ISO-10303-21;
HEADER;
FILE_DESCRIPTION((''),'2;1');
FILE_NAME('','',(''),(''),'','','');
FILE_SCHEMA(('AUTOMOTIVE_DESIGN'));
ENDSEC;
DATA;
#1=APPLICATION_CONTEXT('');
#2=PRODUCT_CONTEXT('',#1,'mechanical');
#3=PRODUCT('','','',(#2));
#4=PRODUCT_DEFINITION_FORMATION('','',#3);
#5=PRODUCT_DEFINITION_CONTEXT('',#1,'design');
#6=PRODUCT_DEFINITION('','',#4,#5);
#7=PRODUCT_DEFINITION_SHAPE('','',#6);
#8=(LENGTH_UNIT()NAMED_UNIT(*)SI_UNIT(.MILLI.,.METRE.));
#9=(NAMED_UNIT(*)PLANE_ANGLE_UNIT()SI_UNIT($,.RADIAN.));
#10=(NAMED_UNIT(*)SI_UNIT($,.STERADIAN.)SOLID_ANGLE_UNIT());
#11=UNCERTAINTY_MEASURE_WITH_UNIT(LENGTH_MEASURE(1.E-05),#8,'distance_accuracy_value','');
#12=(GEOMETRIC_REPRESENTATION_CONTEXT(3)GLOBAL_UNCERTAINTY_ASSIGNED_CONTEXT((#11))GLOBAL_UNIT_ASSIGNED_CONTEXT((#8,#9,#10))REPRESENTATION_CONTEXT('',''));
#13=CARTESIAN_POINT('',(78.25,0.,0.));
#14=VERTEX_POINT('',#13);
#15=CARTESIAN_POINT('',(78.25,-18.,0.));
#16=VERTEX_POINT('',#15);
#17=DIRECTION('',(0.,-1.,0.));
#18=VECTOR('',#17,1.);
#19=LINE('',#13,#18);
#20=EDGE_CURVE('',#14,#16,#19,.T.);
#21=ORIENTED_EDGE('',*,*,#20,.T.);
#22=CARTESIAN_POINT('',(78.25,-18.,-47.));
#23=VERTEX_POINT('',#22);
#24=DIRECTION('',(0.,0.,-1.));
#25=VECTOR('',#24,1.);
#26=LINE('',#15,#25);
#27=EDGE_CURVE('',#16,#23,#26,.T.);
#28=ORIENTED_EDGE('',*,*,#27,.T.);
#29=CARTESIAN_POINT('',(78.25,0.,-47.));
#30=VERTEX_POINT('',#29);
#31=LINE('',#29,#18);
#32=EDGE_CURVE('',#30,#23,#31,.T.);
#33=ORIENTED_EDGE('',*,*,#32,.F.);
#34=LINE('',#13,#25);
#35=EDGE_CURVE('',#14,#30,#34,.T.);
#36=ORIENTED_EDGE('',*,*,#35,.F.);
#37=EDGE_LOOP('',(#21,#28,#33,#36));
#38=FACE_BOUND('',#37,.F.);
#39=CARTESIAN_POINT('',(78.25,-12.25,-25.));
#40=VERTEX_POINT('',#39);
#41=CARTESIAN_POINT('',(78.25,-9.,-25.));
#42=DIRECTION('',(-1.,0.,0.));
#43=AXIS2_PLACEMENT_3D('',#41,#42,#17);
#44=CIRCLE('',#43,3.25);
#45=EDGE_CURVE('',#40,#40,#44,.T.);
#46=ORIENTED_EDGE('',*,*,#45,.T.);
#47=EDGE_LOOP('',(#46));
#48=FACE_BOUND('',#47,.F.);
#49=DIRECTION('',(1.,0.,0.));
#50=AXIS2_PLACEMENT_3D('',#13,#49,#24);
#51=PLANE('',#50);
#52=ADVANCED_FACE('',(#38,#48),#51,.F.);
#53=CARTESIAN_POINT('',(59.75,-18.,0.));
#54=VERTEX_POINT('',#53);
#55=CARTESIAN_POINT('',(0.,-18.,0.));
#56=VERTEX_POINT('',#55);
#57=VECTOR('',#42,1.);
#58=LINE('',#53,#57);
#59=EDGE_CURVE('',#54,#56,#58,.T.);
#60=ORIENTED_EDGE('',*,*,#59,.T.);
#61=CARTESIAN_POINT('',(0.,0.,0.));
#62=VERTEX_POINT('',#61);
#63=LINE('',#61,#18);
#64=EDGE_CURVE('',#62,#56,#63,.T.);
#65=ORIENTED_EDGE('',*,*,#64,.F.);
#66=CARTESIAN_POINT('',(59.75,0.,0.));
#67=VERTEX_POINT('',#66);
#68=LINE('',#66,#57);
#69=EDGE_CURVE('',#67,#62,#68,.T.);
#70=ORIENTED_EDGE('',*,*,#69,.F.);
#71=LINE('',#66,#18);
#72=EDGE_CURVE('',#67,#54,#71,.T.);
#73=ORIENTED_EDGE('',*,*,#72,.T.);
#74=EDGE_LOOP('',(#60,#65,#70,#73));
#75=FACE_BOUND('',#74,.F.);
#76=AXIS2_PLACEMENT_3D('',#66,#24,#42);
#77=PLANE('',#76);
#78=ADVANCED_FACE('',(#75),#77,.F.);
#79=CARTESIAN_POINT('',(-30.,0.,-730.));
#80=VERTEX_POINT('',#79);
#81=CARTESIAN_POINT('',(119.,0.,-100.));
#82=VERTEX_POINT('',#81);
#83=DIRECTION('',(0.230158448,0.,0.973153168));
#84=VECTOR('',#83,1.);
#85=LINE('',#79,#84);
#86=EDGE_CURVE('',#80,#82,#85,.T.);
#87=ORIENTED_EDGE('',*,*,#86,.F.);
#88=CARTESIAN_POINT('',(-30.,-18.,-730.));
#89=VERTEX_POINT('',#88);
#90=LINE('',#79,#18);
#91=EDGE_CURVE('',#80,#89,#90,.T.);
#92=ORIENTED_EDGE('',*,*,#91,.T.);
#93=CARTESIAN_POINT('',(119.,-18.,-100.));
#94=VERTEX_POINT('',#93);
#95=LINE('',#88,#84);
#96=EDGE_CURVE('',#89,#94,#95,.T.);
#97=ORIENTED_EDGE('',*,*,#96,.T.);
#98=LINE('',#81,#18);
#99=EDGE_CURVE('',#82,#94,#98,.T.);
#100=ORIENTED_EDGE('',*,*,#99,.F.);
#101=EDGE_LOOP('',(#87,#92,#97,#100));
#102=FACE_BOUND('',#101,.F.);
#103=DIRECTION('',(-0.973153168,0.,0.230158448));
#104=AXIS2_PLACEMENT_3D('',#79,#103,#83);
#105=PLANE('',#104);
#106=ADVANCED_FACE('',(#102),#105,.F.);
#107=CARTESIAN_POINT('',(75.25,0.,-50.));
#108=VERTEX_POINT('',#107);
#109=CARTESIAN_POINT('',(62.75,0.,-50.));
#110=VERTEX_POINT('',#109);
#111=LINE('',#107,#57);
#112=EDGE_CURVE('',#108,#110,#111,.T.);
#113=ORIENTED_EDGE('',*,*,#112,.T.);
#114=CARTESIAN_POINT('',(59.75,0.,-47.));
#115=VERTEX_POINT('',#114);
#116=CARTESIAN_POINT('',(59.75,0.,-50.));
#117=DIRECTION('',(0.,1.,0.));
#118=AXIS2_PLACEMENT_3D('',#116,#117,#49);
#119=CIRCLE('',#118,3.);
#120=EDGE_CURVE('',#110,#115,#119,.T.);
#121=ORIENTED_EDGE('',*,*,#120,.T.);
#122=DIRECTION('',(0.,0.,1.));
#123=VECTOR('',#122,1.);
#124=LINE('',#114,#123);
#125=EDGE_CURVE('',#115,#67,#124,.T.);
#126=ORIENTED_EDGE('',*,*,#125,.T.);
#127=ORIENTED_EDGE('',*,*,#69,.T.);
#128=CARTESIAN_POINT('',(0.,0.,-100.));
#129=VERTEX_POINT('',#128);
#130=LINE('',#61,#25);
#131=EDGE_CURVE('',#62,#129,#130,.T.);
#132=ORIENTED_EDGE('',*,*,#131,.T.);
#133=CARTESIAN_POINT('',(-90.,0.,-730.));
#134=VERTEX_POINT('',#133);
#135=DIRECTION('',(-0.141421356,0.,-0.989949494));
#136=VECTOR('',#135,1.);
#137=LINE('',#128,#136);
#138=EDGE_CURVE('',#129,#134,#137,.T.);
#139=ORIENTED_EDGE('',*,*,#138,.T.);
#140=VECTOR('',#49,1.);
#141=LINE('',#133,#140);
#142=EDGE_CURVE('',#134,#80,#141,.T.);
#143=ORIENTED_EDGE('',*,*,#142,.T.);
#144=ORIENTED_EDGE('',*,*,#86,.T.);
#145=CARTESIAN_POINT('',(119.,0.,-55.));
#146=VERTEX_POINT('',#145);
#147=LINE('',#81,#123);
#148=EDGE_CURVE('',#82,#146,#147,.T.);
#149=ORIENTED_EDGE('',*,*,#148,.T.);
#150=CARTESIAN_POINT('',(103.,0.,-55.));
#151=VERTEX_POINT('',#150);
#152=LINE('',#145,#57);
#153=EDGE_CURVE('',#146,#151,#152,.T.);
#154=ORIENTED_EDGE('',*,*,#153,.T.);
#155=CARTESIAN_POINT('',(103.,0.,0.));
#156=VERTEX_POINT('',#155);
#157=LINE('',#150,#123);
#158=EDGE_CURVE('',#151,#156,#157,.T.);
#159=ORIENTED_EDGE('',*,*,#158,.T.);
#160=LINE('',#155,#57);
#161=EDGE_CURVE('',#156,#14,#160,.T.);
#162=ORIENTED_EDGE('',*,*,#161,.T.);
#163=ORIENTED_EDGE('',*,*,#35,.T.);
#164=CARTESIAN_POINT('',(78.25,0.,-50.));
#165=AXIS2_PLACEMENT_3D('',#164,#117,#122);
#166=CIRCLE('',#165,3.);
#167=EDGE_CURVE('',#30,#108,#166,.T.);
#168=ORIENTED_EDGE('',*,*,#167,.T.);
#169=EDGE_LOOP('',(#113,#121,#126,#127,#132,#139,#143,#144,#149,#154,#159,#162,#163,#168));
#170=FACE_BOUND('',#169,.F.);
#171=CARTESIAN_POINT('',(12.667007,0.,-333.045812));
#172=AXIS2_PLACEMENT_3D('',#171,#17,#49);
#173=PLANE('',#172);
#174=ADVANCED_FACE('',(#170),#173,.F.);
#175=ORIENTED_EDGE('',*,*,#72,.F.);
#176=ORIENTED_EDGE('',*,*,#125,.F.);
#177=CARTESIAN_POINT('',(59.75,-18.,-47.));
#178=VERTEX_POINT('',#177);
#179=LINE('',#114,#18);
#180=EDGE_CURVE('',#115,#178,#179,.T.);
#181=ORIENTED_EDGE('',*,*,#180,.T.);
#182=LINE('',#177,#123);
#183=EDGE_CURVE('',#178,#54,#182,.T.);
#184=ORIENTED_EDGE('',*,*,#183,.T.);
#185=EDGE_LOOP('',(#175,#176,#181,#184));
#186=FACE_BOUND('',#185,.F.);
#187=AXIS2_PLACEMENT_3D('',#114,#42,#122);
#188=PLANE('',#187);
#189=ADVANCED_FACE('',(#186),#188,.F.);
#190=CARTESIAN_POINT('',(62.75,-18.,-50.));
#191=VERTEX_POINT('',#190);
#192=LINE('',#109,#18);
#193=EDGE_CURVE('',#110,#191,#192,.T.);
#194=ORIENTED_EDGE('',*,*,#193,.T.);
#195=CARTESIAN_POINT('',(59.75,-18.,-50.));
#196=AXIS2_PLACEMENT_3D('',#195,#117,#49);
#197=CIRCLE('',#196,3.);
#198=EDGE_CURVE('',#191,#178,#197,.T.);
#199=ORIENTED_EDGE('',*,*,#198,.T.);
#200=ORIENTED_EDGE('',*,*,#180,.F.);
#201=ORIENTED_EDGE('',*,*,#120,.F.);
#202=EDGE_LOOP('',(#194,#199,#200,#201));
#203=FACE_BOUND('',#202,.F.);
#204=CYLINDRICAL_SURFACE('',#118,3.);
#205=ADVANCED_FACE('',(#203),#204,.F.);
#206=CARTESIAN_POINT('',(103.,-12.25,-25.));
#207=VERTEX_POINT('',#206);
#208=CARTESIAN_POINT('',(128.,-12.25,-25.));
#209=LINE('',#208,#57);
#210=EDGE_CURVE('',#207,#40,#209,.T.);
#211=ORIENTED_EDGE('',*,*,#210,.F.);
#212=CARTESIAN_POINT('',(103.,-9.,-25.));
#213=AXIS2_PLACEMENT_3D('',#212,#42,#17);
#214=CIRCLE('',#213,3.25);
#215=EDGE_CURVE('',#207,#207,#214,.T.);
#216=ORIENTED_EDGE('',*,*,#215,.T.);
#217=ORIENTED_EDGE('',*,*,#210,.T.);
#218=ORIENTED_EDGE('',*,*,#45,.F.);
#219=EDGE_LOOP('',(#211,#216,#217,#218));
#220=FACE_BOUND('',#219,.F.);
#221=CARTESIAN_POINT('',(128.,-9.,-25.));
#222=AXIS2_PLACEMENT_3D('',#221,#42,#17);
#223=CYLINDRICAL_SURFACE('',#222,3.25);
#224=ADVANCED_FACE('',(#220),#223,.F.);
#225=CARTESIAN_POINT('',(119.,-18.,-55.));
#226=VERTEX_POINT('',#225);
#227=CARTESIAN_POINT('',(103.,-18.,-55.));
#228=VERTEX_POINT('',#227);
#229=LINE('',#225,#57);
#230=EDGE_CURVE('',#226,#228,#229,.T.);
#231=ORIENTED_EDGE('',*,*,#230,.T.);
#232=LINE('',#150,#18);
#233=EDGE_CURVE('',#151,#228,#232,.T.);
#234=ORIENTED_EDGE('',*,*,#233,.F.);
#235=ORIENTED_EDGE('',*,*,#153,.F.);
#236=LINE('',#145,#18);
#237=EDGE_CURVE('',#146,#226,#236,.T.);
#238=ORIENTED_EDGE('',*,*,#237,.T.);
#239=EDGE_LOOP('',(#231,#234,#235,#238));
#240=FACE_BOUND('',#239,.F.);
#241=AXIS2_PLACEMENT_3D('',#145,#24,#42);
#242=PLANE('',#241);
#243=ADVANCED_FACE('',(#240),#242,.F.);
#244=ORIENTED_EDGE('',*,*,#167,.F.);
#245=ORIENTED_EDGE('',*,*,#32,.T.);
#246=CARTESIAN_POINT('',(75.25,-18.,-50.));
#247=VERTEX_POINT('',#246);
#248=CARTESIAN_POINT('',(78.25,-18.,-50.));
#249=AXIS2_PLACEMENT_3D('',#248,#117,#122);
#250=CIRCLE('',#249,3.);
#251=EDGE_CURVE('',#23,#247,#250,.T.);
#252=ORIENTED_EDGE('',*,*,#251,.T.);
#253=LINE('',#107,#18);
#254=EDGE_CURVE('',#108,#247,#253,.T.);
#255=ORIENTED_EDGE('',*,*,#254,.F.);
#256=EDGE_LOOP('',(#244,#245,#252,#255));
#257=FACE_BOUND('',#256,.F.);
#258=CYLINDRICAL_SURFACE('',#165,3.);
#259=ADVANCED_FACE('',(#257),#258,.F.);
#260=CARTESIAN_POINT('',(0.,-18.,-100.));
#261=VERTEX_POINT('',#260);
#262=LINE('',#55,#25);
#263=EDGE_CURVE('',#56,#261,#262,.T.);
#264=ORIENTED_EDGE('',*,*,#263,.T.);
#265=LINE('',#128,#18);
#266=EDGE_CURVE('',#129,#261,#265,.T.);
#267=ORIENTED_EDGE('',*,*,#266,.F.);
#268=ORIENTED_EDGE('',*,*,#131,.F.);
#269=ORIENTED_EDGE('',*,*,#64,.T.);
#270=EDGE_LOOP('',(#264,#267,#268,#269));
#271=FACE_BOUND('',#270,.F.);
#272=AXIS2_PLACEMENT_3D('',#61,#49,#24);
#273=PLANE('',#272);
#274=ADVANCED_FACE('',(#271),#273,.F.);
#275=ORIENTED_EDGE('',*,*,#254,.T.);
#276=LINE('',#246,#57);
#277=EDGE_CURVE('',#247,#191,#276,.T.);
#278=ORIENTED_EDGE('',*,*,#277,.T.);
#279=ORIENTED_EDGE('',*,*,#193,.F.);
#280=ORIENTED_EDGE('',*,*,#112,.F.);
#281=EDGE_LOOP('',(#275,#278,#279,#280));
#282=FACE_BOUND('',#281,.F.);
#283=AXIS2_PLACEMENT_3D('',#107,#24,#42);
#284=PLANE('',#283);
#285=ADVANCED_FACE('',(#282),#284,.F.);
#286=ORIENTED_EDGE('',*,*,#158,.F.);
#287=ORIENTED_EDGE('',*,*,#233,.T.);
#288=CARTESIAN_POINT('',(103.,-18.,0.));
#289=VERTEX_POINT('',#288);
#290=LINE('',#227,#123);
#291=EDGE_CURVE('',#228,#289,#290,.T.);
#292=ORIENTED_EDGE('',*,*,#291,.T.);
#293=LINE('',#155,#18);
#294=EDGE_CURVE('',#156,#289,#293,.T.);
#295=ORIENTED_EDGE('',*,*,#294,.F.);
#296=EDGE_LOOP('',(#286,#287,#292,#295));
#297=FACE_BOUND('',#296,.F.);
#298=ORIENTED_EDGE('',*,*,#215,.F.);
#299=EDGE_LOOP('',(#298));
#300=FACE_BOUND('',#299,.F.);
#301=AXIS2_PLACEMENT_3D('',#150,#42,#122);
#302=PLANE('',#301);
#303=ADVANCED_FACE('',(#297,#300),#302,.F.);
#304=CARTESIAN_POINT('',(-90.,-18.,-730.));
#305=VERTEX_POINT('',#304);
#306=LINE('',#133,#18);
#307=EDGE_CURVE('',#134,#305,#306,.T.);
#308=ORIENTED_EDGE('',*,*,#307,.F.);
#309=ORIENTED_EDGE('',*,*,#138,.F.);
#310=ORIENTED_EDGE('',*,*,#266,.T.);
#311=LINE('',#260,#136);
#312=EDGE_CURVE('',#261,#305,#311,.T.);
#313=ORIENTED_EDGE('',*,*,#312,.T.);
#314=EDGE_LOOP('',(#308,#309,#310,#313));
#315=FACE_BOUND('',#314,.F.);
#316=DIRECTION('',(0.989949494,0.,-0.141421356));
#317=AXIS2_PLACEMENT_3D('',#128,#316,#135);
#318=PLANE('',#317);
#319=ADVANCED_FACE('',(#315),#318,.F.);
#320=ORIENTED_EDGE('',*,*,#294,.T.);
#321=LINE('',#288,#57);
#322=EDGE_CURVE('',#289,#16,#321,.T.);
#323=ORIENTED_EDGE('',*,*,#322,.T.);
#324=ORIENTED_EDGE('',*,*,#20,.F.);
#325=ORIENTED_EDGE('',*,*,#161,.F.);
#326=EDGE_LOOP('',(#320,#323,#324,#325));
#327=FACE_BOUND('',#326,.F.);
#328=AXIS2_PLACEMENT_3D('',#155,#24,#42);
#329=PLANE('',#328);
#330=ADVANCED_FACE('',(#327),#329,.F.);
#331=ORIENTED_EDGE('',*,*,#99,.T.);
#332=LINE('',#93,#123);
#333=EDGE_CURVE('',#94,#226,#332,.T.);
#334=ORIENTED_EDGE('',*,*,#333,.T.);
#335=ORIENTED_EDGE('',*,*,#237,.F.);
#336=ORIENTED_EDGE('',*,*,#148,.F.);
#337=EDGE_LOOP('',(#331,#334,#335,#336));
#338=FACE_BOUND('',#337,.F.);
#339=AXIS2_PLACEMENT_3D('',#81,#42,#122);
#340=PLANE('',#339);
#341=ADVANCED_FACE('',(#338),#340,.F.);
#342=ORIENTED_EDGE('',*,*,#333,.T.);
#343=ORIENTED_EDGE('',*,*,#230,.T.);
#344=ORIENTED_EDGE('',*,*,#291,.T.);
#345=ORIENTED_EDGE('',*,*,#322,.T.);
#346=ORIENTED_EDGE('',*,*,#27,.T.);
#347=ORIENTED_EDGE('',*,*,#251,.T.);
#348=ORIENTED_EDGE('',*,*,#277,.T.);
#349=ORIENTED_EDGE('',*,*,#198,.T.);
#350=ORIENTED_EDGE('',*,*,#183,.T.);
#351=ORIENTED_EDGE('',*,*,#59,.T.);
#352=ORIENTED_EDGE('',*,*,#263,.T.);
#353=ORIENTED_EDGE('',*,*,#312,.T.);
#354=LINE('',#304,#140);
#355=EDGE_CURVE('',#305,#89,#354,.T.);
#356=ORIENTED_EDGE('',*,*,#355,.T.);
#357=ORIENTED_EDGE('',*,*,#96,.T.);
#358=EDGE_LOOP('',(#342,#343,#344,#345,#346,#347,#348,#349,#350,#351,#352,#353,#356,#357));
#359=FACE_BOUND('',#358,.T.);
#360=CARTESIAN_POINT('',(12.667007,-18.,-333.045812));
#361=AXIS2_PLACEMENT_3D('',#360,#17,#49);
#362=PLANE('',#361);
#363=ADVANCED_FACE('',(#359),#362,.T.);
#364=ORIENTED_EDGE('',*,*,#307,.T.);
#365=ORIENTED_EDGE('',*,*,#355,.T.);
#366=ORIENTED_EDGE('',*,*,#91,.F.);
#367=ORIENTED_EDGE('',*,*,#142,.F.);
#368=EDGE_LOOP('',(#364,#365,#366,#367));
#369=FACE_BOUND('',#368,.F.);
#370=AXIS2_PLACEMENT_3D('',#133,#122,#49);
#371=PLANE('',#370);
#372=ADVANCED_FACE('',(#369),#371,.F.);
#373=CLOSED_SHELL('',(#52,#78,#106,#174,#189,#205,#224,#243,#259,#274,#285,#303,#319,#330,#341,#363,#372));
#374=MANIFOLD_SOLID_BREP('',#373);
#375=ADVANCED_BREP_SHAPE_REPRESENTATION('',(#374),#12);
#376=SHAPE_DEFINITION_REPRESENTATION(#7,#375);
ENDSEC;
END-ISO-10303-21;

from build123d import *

# Parameters (mm, degrees)
F1_DEPTH = 18
F3_D     = 6.5
F3_DEPTH = 25
F3_TIP   = 1.9527970118


# Not quite as in the source:
# - a feature names something its author has since deleted; it is built from what else it names


with BuildPart() as f1:
    # F0 (on Front) → F1 (new body)
    with BuildSketch(Plane.XZ):
        with BuildLine():
            Line((0, 0), (0, -100))
            Line((0, -100), (-90, -730))
            Line((-90, -730), (-30, -730))
            Line((-30, -730), (119, -100))
            Line((119, -100), (119, -55))
            Line((119, -55), (103, -55))
            Line((103, -55), (103, -25))
            Line((103, -25), (103, 0))
            Line((103, 0), (78.25, 0))
            Line((78.25, 0), (78.25, -47))
            ThreePointArc((78.25, -47), (80.3713203436, -52.1213203436), (75.25, -50))
            Line((75.25, -50), (62.75, -50))
            ThreePointArc((62.75, -50), (57.6286796564, -52.1213203436), (59.75, -47))
            Line((59.75, -47), (59.75, 0))
            Line((59.75, 0), (0, 0))
        make_face()
    extrude(amount=F1_DEPTH)

    # F3
    with Locations(Plane.YZ.offset(103)):
        with Locations((-9, -25)):
            Hole(F3_D / 2, depth=F3_DEPTH)
            with Locations((0, 0, -(F3_DEPTH + F3_TIP / 2))):  # 118° drill point
                Cone(0, F3_D / 2, F3_TIP, mode=Mode.SUBTRACT)


solid = f1.part
